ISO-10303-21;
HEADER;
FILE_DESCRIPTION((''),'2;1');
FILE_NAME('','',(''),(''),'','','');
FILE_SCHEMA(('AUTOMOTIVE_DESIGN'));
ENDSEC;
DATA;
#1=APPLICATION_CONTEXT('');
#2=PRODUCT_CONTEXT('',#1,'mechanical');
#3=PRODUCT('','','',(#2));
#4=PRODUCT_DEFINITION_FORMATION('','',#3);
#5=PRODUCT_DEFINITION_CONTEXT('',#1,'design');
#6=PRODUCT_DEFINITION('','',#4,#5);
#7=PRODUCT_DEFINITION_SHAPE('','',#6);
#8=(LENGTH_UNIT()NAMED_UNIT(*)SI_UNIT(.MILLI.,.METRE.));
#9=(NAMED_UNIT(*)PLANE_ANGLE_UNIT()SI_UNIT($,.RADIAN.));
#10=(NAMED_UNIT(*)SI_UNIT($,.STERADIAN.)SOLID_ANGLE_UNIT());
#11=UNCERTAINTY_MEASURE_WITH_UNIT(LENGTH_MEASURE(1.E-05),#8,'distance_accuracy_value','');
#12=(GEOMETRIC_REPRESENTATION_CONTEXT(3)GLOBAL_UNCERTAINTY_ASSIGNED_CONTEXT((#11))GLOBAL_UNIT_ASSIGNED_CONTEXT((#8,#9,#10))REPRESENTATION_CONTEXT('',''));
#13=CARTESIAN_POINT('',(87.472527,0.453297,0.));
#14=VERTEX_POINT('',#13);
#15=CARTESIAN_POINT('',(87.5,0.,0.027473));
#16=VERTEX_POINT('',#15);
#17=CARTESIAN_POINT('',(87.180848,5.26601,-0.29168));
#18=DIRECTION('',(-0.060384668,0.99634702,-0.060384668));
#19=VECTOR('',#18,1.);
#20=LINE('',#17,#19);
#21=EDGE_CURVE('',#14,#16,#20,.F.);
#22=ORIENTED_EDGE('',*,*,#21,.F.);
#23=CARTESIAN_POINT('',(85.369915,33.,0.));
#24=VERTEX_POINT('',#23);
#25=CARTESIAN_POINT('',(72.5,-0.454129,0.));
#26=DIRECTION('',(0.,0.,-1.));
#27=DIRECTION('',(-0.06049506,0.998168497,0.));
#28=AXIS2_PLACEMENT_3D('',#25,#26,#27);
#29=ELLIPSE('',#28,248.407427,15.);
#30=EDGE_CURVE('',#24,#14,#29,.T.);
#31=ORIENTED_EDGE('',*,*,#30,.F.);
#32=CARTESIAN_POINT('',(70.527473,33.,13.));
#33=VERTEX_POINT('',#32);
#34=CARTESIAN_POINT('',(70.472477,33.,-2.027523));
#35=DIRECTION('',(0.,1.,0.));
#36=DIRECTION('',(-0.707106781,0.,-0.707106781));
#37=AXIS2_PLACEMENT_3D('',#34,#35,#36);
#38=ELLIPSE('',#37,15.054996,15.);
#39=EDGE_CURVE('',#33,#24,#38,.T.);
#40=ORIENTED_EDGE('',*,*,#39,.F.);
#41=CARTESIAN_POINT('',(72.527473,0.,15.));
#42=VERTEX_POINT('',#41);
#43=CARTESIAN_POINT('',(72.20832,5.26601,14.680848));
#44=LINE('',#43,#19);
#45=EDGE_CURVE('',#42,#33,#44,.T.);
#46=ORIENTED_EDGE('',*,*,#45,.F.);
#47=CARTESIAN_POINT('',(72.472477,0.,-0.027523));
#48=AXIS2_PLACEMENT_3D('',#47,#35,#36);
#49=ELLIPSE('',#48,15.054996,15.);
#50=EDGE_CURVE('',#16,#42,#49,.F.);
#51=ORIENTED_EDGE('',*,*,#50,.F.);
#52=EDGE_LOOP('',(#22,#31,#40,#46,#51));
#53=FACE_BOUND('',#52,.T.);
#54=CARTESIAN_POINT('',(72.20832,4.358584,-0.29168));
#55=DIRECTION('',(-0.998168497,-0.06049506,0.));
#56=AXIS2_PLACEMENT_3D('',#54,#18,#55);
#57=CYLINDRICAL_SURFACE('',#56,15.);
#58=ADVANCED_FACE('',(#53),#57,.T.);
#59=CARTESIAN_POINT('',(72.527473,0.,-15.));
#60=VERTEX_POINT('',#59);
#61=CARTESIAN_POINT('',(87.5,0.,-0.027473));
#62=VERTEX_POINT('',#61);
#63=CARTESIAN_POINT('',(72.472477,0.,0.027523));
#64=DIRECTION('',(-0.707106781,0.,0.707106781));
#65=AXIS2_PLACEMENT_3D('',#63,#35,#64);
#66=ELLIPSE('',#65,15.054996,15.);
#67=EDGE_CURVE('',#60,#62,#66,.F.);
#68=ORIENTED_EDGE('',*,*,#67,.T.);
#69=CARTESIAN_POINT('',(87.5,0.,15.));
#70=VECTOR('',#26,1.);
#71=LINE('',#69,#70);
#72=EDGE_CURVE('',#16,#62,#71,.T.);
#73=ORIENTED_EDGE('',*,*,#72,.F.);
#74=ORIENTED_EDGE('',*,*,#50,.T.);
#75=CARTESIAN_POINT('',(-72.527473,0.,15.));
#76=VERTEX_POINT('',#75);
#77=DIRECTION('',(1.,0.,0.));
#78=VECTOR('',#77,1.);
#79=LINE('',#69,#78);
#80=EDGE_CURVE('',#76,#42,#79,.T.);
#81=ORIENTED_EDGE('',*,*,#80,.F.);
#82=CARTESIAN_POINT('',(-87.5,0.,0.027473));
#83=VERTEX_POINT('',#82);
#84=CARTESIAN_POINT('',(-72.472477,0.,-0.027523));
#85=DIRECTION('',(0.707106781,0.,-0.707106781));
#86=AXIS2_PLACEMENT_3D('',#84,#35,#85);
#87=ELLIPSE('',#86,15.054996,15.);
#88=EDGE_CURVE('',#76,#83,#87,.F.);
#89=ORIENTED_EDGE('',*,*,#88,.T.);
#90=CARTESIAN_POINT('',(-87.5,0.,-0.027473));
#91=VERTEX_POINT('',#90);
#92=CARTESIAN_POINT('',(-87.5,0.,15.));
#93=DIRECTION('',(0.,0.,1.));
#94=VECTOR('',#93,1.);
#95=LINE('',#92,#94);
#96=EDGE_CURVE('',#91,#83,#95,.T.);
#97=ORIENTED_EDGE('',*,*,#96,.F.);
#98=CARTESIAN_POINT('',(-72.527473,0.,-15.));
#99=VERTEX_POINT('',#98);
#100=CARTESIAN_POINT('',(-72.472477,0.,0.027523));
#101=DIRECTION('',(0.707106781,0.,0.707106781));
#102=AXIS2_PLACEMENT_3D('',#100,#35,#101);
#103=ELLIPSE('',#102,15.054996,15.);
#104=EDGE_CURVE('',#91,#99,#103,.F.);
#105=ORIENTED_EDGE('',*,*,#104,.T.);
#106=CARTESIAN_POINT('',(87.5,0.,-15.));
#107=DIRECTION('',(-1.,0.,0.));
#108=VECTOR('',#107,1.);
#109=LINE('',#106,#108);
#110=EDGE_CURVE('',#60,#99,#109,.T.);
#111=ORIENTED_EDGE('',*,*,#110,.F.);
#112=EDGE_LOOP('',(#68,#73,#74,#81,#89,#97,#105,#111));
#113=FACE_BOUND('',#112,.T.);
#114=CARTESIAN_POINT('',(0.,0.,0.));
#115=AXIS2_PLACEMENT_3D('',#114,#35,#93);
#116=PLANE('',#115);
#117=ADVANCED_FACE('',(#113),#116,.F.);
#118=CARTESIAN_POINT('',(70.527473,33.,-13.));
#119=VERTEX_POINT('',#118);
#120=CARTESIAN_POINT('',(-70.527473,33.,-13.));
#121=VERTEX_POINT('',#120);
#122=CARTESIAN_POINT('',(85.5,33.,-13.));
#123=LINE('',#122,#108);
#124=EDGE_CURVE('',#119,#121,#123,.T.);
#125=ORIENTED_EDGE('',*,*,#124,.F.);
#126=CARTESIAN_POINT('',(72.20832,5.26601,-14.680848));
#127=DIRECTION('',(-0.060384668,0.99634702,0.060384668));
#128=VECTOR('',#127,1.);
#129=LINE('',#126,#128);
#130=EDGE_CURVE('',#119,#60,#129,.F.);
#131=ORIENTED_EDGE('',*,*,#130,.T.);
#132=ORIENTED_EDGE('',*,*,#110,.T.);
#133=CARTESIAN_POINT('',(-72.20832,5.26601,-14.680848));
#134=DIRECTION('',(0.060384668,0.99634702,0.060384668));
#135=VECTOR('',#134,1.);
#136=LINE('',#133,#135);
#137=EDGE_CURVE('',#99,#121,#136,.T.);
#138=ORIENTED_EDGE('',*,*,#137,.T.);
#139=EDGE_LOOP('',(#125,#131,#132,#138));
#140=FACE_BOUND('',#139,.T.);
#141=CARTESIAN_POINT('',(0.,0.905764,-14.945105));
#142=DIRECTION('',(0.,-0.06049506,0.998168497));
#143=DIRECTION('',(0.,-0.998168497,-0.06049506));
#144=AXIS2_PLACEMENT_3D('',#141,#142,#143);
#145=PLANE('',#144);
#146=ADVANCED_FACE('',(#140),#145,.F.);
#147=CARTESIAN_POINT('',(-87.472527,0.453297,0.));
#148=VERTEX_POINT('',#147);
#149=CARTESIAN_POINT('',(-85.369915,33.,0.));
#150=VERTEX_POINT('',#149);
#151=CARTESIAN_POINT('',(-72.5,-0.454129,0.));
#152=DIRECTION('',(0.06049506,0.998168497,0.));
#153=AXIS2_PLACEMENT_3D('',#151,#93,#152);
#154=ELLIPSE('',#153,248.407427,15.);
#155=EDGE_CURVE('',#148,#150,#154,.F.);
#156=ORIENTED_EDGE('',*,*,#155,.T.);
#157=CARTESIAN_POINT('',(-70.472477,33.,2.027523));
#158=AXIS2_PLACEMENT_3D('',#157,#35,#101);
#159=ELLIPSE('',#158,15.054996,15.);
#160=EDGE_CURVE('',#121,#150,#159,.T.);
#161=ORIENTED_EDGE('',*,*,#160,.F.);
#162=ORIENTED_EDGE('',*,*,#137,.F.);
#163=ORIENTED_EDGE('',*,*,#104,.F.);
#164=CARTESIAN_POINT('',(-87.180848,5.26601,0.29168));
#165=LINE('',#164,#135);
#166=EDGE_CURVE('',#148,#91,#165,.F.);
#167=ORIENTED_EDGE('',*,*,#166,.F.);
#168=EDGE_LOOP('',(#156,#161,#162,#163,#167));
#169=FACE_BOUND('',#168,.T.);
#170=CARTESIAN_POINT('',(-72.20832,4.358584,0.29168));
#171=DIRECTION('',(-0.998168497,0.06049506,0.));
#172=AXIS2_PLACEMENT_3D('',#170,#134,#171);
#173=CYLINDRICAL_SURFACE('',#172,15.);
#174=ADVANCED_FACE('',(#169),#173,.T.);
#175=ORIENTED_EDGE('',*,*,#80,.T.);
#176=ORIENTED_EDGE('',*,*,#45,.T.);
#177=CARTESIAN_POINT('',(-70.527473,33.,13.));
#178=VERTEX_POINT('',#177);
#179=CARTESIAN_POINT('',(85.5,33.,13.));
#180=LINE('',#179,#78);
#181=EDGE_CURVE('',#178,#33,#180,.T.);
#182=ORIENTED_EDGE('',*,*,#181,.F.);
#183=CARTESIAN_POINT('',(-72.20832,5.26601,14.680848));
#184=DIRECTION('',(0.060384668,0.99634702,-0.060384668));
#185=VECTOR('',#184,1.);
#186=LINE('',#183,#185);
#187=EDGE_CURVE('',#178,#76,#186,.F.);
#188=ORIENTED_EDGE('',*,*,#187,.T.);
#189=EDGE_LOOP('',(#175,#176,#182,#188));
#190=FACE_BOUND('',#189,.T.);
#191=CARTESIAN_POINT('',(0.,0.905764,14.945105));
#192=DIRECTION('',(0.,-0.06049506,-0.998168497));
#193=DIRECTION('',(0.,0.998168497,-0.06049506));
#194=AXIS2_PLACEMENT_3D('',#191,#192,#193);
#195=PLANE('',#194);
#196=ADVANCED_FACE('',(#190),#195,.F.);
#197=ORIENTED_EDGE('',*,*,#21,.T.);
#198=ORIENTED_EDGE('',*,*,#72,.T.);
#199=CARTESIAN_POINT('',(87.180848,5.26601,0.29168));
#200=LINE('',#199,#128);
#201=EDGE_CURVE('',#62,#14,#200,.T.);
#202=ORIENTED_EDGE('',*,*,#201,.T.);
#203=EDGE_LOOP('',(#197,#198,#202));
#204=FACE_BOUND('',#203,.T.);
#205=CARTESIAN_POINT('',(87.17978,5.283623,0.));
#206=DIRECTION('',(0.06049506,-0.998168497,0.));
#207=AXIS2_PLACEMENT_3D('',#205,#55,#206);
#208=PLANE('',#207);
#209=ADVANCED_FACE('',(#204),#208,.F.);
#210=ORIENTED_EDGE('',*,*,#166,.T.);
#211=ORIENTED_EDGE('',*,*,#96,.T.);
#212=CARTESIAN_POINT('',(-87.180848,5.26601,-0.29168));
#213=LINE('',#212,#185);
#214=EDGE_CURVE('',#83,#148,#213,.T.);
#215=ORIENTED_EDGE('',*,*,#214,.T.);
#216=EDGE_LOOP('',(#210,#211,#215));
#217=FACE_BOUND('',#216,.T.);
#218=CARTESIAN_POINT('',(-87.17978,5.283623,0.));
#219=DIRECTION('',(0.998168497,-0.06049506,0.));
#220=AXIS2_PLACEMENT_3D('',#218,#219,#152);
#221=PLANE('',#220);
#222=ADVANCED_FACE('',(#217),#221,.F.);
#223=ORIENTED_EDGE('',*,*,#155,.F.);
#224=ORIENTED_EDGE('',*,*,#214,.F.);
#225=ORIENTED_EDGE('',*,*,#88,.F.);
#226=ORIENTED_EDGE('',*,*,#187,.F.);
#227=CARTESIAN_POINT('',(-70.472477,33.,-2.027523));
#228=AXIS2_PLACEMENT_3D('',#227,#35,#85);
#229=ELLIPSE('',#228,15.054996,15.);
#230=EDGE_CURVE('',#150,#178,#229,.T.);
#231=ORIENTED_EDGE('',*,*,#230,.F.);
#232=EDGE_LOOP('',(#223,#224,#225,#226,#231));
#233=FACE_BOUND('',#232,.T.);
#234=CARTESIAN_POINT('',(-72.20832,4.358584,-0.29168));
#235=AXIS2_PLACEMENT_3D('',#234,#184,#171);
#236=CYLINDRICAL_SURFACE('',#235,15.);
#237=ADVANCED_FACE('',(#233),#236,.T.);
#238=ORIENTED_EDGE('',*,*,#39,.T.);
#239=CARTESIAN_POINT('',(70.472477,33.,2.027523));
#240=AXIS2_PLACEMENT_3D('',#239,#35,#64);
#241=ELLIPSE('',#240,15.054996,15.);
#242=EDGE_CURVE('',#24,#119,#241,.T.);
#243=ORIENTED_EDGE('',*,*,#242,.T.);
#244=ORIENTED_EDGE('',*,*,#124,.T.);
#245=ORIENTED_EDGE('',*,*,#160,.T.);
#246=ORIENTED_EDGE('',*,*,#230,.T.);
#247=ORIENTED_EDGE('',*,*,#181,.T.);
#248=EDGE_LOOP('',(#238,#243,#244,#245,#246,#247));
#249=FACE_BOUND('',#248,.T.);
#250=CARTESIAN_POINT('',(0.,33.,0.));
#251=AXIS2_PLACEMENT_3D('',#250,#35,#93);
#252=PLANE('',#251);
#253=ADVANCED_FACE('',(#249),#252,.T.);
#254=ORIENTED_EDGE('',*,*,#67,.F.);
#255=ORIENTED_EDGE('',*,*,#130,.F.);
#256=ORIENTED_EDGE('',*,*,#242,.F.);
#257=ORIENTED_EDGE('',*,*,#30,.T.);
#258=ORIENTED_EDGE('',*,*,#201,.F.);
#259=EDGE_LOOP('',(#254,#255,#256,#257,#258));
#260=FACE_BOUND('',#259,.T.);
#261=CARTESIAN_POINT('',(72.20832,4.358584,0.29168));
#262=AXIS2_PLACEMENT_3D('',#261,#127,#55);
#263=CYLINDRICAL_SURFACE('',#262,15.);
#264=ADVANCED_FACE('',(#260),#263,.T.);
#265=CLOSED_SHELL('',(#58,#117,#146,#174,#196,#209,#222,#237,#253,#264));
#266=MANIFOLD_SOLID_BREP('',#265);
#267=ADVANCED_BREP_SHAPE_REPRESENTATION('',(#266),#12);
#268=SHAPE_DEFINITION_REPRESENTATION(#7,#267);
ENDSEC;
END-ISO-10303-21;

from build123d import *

# Parameters (mm, degrees)
FILLET_1_R = 15


with BuildPart() as part:
    # 草图1 → 放样1 section 0
    with BuildSketch(Plane(origin=(0, 0, 0), x_dir=(1, 0, 0), z_dir=(0, 1, 0))):
        with BuildLine():
            Line((87.50000000000003, -14.999999999999991), (-87.49999999999997, -15.000000000000012))
            Line((-87.49999999999997, -15.000000000000012), (-87.49999999999997, 14.999999999999986))
            Line((-87.49999999999997, 14.999999999999986), (87.50000000000003, 15.000000000000007))
            Line((87.50000000000003, 15.000000000000007), (87.50000000000003, -14.999999999999991))
        make_face()
    # 草图2 → 放样1 section 1
    with BuildSketch(Plane(origin=(0, 33, 0), x_dir=(1, 0, 0), z_dir=(0, 1, 0))):
        with BuildLine():
            Line((85.50000000000001, 13.000000000000007), (-85.49999999999997, 13.000000000000007))
            Line((-85.49999999999997, 13.000000000000007), (-85.49999999999997, -12.999999999999991))
            Line((-85.49999999999997, -12.999999999999991), (85.50000000000001, -12.999999999999991))
            Line((85.50000000000001, -12.999999999999991), (85.50000000000001, 13.000000000000007))
        make_face()
    loft()

    # 圆角1
    # the kernel refuses this fillet: 15 mm, written as the material it takes off along each edge
    with BuildSketch(Plane(origin=(89.75615314494081, -37.226526891522596, -17.25615314494077), x_dir=(-0.99817518096122, -0.0602740731413001, -0.0036529741297753678), z_dir=(-0.06038466786391727, 0.9963470197546278, 0.06038466786391684))) as fillet_1_piece_1:
        with BuildLine():
            CenterArc((FILLET_1_R * 0.996347019755, FILLET_1_R), FILLET_1_R, 180.20968310121904, 89.79031689878093)
            Line((-FILLET_1_R * 0.00364628369535, FILLET_1_R * 0.996340347667), (0, 0))
            Line((0, 0), (FILLET_1_R * 0.996347019755, 1e-17))
        make_face()
    extrude(amount=107.84701680495597, mode=Mode.SUBTRACT)
    with BuildSketch(Plane(origin=(89.7561531449408, -37.226526891522376, 17.25615314494074), x_dir=(-0.9981751809612202, -0.06027407314129964, 0.003652974129776053), z_dir=(-0.06038466786391684, 0.9963470197546278, -0.06038466786391684))) as fillet_1_piece_2:
        with BuildLine():
            CenterArc((FILLET_1_R * 0.996347019755, -FILLET_1_R), FILLET_1_R, 89.99999999999999, 89.79031689878094)
            Line((-FILLET_1_R * 0.00364628369535, -FILLET_1_R * 0.996340347667), (0, 0))
            Line((0, 0), (FILLET_1_R * 0.996347019755, 0))
        make_face()
    extrude(amount=107.84701680495557, mode=Mode.SUBTRACT)
    with BuildSketch(Plane(origin=(-89.75615314494071, -37.226526891522205, -17.256153144940704), x_dir=(-0.0036529741297760742, -0.06027407314129905, 0.9981751809612202), z_dir=(0.06038466786391684, 0.9963470197546278, 0.06038466786391625))) as fillet_1_piece_3:
        with BuildLine():
            CenterArc((FILLET_1_R * 0.996347019755, FILLET_1_R), FILLET_1_R, 180.20968310121907, 89.79031689878093)
            Line((-FILLET_1_R * 0.00364628369535, FILLET_1_R * 0.996340347667), (0, 0))
            Line((0, 0), (FILLET_1_R * 0.996347019755, -1e-17))
        make_face()
    extrude(amount=107.84701680495523, mode=Mode.SUBTRACT)
    with BuildSketch(Plane(origin=(-89.75615314494074, -37.22652689152266, 17.256153144940804), x_dir=(0.99817518096122, -0.060274073141299664, 0.0036529741297756076), z_dir=(0.06038466786391684, 0.9963470197546278, -0.06038466786391748))) as fillet_1_piece_4:
        with BuildLine():
            CenterArc((FILLET_1_R * 0.996347019755, FILLET_1_R), FILLET_1_R, 180.20968310121904, 89.79031689878093)
            Line((-FILLET_1_R * 0.00364628369535, FILLET_1_R * 0.996340347667), (0, 0))
            Line((0, 0), (FILLET_1_R * 0.996347019755, 0))
        make_face()
    extrude(amount=107.84701680495613, mode=Mode.SUBTRACT)


solid = part.part
